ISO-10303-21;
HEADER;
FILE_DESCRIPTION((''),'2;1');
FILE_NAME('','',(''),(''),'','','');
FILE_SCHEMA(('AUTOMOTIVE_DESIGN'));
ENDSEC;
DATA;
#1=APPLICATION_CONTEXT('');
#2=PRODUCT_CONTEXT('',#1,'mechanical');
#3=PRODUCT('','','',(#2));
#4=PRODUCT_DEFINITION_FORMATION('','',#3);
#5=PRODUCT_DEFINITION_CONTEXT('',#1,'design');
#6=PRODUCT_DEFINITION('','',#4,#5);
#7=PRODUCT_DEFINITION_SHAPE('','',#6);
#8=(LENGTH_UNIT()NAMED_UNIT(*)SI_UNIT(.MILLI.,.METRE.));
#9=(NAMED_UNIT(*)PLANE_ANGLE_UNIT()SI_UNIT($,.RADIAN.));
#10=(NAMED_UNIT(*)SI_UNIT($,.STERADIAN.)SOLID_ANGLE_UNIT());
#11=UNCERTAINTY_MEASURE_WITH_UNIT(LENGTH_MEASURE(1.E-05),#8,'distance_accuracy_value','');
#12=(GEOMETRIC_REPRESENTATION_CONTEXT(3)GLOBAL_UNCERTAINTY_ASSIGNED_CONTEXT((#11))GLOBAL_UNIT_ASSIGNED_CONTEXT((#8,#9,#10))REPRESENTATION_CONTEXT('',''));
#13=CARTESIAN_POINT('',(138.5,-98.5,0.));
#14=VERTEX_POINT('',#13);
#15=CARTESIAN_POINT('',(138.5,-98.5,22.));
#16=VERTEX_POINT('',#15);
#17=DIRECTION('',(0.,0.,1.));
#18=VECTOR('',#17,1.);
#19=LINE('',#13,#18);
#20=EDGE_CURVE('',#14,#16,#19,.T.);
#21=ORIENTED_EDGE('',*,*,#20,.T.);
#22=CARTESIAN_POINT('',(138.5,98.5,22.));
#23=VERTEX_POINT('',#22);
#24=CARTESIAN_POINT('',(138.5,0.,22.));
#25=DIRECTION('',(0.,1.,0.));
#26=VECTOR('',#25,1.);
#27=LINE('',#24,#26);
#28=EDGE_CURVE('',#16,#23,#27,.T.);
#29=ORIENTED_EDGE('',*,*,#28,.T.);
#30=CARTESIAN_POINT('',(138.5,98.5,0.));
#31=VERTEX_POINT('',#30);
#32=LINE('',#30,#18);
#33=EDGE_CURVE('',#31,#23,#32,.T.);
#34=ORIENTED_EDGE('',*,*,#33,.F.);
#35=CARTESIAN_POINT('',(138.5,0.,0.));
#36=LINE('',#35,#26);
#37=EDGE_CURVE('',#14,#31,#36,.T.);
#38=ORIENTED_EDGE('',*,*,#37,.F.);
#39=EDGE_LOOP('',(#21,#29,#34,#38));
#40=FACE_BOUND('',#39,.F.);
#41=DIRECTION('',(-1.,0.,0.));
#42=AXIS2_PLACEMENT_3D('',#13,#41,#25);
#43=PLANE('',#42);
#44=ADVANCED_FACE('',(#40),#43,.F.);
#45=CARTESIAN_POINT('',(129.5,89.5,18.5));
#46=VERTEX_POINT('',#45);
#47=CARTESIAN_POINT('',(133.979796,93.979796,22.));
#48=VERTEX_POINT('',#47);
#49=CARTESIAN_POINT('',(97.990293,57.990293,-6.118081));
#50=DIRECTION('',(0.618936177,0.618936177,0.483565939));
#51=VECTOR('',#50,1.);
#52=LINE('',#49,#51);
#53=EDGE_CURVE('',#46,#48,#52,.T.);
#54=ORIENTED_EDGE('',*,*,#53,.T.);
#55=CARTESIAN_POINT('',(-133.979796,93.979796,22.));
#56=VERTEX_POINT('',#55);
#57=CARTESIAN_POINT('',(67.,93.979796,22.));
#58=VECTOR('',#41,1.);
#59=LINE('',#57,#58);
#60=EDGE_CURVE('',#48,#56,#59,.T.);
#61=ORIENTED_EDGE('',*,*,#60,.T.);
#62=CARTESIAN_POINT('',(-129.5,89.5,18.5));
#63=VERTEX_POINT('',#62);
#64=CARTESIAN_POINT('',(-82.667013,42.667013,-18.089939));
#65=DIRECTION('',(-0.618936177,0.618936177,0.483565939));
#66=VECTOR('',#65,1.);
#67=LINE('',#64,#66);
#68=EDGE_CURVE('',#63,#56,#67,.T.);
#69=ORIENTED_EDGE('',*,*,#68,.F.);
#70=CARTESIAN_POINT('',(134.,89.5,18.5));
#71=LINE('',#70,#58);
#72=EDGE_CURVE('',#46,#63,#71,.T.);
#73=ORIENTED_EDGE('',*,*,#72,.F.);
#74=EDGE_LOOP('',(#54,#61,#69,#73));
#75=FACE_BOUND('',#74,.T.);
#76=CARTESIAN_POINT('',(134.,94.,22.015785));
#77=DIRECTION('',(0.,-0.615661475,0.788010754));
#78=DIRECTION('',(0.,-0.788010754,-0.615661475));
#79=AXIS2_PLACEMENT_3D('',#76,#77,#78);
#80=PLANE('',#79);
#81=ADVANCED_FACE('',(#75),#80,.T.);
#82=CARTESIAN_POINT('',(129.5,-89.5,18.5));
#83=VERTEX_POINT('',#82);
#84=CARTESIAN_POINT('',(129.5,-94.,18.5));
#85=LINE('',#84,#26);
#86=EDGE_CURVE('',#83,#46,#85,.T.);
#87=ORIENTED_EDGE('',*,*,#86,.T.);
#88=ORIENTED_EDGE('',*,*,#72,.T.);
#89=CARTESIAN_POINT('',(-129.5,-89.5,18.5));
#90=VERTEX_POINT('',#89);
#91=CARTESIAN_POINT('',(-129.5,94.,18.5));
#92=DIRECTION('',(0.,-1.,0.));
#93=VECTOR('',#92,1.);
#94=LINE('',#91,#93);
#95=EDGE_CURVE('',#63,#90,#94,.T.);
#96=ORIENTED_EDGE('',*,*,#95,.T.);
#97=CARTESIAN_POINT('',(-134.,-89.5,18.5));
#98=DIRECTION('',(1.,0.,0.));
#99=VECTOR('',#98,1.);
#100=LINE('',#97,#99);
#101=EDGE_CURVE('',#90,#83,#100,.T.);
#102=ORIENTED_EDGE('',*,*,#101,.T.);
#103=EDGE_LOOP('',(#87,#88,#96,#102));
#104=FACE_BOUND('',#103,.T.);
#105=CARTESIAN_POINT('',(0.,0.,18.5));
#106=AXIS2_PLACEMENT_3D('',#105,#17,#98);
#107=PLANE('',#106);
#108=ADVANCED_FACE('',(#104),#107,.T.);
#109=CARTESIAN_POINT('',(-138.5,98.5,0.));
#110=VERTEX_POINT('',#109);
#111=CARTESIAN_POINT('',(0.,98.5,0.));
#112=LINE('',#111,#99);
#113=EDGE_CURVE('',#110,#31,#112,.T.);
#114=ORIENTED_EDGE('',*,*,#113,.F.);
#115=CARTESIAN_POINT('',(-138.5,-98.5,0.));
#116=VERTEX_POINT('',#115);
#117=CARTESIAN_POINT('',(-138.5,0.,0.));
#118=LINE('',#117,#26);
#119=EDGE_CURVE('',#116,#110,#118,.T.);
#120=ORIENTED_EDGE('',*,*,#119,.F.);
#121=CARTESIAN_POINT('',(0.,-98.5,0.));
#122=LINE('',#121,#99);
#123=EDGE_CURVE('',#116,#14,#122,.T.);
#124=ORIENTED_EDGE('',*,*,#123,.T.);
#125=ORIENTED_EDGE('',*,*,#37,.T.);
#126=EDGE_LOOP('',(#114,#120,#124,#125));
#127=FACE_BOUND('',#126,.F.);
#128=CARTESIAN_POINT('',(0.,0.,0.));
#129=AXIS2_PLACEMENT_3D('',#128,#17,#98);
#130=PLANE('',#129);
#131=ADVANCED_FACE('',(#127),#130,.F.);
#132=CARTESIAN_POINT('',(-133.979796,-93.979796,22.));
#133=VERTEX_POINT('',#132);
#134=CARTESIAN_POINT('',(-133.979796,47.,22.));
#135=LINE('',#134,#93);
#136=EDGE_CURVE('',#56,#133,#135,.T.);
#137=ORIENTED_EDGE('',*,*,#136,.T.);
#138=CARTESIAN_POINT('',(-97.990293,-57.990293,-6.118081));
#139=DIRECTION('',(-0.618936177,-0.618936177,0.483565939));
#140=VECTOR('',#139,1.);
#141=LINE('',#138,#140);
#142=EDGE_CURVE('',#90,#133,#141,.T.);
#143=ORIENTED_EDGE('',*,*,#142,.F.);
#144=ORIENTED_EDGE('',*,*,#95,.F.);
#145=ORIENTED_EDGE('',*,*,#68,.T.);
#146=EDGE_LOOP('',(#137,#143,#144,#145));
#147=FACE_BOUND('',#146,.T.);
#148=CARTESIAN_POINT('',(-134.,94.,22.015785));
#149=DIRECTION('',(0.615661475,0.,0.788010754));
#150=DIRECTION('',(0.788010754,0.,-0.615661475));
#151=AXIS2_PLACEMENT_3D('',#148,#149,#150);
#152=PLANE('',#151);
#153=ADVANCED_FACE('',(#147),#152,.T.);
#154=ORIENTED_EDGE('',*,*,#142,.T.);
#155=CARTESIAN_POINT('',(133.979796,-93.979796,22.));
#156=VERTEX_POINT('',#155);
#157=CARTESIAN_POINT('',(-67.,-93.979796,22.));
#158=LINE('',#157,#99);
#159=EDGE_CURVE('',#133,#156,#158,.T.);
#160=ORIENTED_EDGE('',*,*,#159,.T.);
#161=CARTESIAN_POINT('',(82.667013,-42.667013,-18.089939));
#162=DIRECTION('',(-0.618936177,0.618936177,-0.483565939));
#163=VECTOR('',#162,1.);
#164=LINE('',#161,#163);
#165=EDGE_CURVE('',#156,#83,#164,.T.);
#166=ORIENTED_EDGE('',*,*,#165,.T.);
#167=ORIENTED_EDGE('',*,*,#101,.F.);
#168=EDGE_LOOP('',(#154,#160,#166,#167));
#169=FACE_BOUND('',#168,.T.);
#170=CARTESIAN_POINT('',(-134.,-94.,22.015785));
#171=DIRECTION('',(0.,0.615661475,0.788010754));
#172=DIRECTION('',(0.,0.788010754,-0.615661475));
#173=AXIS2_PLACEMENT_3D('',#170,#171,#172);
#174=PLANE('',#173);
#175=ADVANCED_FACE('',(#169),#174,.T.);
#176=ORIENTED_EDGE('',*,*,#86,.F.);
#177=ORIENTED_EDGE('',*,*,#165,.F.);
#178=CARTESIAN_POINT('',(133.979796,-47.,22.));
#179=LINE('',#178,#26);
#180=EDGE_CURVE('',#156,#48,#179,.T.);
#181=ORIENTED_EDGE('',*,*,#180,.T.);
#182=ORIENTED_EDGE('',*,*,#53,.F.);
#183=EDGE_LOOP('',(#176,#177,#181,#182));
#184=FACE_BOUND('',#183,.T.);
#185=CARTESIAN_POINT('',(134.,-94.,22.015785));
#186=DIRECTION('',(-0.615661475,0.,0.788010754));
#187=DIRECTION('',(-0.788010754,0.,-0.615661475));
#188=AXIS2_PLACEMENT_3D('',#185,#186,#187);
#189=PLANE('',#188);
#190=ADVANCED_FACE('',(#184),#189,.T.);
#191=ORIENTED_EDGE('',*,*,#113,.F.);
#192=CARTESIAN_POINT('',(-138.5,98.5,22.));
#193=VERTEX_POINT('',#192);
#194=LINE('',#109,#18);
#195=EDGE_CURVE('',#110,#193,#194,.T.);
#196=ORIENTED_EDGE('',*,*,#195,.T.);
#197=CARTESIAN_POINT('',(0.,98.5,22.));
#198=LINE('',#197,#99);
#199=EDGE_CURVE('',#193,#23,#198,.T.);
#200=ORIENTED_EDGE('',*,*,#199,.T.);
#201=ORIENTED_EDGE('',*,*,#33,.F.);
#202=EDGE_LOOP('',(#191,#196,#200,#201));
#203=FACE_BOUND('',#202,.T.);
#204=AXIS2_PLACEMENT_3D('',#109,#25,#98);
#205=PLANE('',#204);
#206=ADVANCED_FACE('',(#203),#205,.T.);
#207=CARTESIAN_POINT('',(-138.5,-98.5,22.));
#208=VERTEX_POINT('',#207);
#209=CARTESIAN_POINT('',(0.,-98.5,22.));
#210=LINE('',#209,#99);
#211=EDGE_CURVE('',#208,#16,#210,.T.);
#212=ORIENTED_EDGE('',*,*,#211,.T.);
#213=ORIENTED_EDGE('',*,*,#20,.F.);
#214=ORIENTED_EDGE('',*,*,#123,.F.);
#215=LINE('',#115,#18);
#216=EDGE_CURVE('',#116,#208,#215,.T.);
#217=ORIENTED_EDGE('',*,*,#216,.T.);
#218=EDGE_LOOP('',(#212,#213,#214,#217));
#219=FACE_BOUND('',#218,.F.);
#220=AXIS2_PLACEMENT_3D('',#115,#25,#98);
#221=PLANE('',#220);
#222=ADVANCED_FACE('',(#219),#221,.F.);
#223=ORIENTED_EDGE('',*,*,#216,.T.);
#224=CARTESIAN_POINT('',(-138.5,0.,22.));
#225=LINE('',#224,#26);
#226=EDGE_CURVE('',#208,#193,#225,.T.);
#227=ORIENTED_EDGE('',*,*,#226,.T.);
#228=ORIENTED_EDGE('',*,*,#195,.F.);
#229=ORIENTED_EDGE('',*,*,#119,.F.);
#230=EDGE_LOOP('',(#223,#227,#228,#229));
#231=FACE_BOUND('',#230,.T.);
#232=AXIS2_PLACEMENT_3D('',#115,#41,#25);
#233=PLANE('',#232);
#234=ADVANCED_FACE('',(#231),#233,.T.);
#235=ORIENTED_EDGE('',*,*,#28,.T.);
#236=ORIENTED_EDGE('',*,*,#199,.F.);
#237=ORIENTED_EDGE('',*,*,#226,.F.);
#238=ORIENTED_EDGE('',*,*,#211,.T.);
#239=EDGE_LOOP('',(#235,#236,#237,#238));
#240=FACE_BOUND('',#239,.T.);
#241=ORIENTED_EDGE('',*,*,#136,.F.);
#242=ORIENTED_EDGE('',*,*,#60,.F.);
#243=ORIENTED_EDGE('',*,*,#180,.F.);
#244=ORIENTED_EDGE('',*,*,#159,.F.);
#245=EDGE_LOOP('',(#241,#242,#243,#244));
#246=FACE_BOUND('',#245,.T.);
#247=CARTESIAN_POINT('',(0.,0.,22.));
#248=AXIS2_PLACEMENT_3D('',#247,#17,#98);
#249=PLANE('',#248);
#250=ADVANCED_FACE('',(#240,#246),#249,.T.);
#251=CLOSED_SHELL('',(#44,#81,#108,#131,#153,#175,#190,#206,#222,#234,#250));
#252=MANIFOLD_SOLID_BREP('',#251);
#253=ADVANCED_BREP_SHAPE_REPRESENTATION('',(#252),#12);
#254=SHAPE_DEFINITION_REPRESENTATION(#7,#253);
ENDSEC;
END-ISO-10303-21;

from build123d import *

# Parameters (mm, degrees)
F0_W         = 277
F0_H         = 197
F1_DEPTH     = 22
F2_W         = 268
F2_H         = 188
F3_DEPTH     = 3.5
F4_T4_DEPTH  = 188
F4_T9_DEPTH  = 268
F4_T14_DEPTH = 188
F4_T19_DEPTH = 268


# Not quite as in the source:
# - a fillet or chamfer that OpenCascade refuses, or shapes differently, is made with other operations: its cross-section is extruded or revolved along the edge and cut away or added


with BuildPart() as f1:
    # F0 (on Top) → F1 (new body)
    with BuildSketch(Plane.XY):
        Rectangle(F0_W, F0_H)
    extrude(amount=F1_DEPTH)

    # F2 (on face) → F3 (cut)
    with BuildSketch(Plane.XY.offset(22)):
        Rectangle(F2_W, F2_H)
    extrude(amount=-F3_DEPTH, mode=Mode.SUBTRACT)

    # F4: chamfer of 4.5 x 3.5157853193 on 4 edges, made by hand


with BuildPart() as f4_tool2:
    # F4_s3 → F4_t4 (new body)
    with BuildSketch(Plane.XZ.offset(94)):
        Polygon((134, 22.0157853193), (129.5, 18.5), (134, 18.5), align=None)
    extrude(amount=-F4_T4_DEPTH)

    split(bisect_by=Plane.XY.offset(22), keep=Keep.BOTTOM)


with BuildPart() as f1_1:
    add(f1.part)

    # F4_t1: union F4_tool2
    add(f4_tool2.part)


with BuildPart() as f4_tool7:
    # F4_s8 → F4_t9 (new body)
    with BuildSketch(Plane.YZ.offset(134)):
        Polygon((94, 22.0157853193), (89.5, 18.5), (94, 18.5), align=None)
    extrude(amount=-F4_T9_DEPTH)

    split(bisect_by=Plane.XY.offset(22), keep=Keep.BOTTOM)


with BuildPart() as f1_2:
    add(f1_1.part)

    # F4_t6: union F4_tool7
    add(f4_tool7.part)


with BuildPart() as f4_tool12:
    # F4_s13 → F4_t14 (new body)
    with BuildSketch(Plane.XZ.offset(-94)):
        Polygon((-134, 22.0157853193), (-129.5, 18.5), (-134, 18.5), align=None)
    extrude(amount=F4_T14_DEPTH)

    split(bisect_by=Plane.XY.offset(22), keep=Keep.BOTTOM)


with BuildPart() as f1_3:
    add(f1_2.part)

    # F4_t11: union F4_tool12
    add(f4_tool12.part)


with BuildPart() as f4_tool17:
    # F4_s18 → F4_t19 (new body)
    with BuildSketch(Plane.YZ.offset(-134)):
        Polygon((-94, 22.0157853193), (-89.5, 18.5), (-94, 18.5), align=None)
    extrude(amount=F4_T19_DEPTH)

    split(bisect_by=Plane.XY.offset(22), keep=Keep.BOTTOM)


with BuildPart() as f1_4:
    add(f1_3.part)

    # F4_t16: union F4_tool17
    add(f4_tool17.part)


solid = f1_4.part
